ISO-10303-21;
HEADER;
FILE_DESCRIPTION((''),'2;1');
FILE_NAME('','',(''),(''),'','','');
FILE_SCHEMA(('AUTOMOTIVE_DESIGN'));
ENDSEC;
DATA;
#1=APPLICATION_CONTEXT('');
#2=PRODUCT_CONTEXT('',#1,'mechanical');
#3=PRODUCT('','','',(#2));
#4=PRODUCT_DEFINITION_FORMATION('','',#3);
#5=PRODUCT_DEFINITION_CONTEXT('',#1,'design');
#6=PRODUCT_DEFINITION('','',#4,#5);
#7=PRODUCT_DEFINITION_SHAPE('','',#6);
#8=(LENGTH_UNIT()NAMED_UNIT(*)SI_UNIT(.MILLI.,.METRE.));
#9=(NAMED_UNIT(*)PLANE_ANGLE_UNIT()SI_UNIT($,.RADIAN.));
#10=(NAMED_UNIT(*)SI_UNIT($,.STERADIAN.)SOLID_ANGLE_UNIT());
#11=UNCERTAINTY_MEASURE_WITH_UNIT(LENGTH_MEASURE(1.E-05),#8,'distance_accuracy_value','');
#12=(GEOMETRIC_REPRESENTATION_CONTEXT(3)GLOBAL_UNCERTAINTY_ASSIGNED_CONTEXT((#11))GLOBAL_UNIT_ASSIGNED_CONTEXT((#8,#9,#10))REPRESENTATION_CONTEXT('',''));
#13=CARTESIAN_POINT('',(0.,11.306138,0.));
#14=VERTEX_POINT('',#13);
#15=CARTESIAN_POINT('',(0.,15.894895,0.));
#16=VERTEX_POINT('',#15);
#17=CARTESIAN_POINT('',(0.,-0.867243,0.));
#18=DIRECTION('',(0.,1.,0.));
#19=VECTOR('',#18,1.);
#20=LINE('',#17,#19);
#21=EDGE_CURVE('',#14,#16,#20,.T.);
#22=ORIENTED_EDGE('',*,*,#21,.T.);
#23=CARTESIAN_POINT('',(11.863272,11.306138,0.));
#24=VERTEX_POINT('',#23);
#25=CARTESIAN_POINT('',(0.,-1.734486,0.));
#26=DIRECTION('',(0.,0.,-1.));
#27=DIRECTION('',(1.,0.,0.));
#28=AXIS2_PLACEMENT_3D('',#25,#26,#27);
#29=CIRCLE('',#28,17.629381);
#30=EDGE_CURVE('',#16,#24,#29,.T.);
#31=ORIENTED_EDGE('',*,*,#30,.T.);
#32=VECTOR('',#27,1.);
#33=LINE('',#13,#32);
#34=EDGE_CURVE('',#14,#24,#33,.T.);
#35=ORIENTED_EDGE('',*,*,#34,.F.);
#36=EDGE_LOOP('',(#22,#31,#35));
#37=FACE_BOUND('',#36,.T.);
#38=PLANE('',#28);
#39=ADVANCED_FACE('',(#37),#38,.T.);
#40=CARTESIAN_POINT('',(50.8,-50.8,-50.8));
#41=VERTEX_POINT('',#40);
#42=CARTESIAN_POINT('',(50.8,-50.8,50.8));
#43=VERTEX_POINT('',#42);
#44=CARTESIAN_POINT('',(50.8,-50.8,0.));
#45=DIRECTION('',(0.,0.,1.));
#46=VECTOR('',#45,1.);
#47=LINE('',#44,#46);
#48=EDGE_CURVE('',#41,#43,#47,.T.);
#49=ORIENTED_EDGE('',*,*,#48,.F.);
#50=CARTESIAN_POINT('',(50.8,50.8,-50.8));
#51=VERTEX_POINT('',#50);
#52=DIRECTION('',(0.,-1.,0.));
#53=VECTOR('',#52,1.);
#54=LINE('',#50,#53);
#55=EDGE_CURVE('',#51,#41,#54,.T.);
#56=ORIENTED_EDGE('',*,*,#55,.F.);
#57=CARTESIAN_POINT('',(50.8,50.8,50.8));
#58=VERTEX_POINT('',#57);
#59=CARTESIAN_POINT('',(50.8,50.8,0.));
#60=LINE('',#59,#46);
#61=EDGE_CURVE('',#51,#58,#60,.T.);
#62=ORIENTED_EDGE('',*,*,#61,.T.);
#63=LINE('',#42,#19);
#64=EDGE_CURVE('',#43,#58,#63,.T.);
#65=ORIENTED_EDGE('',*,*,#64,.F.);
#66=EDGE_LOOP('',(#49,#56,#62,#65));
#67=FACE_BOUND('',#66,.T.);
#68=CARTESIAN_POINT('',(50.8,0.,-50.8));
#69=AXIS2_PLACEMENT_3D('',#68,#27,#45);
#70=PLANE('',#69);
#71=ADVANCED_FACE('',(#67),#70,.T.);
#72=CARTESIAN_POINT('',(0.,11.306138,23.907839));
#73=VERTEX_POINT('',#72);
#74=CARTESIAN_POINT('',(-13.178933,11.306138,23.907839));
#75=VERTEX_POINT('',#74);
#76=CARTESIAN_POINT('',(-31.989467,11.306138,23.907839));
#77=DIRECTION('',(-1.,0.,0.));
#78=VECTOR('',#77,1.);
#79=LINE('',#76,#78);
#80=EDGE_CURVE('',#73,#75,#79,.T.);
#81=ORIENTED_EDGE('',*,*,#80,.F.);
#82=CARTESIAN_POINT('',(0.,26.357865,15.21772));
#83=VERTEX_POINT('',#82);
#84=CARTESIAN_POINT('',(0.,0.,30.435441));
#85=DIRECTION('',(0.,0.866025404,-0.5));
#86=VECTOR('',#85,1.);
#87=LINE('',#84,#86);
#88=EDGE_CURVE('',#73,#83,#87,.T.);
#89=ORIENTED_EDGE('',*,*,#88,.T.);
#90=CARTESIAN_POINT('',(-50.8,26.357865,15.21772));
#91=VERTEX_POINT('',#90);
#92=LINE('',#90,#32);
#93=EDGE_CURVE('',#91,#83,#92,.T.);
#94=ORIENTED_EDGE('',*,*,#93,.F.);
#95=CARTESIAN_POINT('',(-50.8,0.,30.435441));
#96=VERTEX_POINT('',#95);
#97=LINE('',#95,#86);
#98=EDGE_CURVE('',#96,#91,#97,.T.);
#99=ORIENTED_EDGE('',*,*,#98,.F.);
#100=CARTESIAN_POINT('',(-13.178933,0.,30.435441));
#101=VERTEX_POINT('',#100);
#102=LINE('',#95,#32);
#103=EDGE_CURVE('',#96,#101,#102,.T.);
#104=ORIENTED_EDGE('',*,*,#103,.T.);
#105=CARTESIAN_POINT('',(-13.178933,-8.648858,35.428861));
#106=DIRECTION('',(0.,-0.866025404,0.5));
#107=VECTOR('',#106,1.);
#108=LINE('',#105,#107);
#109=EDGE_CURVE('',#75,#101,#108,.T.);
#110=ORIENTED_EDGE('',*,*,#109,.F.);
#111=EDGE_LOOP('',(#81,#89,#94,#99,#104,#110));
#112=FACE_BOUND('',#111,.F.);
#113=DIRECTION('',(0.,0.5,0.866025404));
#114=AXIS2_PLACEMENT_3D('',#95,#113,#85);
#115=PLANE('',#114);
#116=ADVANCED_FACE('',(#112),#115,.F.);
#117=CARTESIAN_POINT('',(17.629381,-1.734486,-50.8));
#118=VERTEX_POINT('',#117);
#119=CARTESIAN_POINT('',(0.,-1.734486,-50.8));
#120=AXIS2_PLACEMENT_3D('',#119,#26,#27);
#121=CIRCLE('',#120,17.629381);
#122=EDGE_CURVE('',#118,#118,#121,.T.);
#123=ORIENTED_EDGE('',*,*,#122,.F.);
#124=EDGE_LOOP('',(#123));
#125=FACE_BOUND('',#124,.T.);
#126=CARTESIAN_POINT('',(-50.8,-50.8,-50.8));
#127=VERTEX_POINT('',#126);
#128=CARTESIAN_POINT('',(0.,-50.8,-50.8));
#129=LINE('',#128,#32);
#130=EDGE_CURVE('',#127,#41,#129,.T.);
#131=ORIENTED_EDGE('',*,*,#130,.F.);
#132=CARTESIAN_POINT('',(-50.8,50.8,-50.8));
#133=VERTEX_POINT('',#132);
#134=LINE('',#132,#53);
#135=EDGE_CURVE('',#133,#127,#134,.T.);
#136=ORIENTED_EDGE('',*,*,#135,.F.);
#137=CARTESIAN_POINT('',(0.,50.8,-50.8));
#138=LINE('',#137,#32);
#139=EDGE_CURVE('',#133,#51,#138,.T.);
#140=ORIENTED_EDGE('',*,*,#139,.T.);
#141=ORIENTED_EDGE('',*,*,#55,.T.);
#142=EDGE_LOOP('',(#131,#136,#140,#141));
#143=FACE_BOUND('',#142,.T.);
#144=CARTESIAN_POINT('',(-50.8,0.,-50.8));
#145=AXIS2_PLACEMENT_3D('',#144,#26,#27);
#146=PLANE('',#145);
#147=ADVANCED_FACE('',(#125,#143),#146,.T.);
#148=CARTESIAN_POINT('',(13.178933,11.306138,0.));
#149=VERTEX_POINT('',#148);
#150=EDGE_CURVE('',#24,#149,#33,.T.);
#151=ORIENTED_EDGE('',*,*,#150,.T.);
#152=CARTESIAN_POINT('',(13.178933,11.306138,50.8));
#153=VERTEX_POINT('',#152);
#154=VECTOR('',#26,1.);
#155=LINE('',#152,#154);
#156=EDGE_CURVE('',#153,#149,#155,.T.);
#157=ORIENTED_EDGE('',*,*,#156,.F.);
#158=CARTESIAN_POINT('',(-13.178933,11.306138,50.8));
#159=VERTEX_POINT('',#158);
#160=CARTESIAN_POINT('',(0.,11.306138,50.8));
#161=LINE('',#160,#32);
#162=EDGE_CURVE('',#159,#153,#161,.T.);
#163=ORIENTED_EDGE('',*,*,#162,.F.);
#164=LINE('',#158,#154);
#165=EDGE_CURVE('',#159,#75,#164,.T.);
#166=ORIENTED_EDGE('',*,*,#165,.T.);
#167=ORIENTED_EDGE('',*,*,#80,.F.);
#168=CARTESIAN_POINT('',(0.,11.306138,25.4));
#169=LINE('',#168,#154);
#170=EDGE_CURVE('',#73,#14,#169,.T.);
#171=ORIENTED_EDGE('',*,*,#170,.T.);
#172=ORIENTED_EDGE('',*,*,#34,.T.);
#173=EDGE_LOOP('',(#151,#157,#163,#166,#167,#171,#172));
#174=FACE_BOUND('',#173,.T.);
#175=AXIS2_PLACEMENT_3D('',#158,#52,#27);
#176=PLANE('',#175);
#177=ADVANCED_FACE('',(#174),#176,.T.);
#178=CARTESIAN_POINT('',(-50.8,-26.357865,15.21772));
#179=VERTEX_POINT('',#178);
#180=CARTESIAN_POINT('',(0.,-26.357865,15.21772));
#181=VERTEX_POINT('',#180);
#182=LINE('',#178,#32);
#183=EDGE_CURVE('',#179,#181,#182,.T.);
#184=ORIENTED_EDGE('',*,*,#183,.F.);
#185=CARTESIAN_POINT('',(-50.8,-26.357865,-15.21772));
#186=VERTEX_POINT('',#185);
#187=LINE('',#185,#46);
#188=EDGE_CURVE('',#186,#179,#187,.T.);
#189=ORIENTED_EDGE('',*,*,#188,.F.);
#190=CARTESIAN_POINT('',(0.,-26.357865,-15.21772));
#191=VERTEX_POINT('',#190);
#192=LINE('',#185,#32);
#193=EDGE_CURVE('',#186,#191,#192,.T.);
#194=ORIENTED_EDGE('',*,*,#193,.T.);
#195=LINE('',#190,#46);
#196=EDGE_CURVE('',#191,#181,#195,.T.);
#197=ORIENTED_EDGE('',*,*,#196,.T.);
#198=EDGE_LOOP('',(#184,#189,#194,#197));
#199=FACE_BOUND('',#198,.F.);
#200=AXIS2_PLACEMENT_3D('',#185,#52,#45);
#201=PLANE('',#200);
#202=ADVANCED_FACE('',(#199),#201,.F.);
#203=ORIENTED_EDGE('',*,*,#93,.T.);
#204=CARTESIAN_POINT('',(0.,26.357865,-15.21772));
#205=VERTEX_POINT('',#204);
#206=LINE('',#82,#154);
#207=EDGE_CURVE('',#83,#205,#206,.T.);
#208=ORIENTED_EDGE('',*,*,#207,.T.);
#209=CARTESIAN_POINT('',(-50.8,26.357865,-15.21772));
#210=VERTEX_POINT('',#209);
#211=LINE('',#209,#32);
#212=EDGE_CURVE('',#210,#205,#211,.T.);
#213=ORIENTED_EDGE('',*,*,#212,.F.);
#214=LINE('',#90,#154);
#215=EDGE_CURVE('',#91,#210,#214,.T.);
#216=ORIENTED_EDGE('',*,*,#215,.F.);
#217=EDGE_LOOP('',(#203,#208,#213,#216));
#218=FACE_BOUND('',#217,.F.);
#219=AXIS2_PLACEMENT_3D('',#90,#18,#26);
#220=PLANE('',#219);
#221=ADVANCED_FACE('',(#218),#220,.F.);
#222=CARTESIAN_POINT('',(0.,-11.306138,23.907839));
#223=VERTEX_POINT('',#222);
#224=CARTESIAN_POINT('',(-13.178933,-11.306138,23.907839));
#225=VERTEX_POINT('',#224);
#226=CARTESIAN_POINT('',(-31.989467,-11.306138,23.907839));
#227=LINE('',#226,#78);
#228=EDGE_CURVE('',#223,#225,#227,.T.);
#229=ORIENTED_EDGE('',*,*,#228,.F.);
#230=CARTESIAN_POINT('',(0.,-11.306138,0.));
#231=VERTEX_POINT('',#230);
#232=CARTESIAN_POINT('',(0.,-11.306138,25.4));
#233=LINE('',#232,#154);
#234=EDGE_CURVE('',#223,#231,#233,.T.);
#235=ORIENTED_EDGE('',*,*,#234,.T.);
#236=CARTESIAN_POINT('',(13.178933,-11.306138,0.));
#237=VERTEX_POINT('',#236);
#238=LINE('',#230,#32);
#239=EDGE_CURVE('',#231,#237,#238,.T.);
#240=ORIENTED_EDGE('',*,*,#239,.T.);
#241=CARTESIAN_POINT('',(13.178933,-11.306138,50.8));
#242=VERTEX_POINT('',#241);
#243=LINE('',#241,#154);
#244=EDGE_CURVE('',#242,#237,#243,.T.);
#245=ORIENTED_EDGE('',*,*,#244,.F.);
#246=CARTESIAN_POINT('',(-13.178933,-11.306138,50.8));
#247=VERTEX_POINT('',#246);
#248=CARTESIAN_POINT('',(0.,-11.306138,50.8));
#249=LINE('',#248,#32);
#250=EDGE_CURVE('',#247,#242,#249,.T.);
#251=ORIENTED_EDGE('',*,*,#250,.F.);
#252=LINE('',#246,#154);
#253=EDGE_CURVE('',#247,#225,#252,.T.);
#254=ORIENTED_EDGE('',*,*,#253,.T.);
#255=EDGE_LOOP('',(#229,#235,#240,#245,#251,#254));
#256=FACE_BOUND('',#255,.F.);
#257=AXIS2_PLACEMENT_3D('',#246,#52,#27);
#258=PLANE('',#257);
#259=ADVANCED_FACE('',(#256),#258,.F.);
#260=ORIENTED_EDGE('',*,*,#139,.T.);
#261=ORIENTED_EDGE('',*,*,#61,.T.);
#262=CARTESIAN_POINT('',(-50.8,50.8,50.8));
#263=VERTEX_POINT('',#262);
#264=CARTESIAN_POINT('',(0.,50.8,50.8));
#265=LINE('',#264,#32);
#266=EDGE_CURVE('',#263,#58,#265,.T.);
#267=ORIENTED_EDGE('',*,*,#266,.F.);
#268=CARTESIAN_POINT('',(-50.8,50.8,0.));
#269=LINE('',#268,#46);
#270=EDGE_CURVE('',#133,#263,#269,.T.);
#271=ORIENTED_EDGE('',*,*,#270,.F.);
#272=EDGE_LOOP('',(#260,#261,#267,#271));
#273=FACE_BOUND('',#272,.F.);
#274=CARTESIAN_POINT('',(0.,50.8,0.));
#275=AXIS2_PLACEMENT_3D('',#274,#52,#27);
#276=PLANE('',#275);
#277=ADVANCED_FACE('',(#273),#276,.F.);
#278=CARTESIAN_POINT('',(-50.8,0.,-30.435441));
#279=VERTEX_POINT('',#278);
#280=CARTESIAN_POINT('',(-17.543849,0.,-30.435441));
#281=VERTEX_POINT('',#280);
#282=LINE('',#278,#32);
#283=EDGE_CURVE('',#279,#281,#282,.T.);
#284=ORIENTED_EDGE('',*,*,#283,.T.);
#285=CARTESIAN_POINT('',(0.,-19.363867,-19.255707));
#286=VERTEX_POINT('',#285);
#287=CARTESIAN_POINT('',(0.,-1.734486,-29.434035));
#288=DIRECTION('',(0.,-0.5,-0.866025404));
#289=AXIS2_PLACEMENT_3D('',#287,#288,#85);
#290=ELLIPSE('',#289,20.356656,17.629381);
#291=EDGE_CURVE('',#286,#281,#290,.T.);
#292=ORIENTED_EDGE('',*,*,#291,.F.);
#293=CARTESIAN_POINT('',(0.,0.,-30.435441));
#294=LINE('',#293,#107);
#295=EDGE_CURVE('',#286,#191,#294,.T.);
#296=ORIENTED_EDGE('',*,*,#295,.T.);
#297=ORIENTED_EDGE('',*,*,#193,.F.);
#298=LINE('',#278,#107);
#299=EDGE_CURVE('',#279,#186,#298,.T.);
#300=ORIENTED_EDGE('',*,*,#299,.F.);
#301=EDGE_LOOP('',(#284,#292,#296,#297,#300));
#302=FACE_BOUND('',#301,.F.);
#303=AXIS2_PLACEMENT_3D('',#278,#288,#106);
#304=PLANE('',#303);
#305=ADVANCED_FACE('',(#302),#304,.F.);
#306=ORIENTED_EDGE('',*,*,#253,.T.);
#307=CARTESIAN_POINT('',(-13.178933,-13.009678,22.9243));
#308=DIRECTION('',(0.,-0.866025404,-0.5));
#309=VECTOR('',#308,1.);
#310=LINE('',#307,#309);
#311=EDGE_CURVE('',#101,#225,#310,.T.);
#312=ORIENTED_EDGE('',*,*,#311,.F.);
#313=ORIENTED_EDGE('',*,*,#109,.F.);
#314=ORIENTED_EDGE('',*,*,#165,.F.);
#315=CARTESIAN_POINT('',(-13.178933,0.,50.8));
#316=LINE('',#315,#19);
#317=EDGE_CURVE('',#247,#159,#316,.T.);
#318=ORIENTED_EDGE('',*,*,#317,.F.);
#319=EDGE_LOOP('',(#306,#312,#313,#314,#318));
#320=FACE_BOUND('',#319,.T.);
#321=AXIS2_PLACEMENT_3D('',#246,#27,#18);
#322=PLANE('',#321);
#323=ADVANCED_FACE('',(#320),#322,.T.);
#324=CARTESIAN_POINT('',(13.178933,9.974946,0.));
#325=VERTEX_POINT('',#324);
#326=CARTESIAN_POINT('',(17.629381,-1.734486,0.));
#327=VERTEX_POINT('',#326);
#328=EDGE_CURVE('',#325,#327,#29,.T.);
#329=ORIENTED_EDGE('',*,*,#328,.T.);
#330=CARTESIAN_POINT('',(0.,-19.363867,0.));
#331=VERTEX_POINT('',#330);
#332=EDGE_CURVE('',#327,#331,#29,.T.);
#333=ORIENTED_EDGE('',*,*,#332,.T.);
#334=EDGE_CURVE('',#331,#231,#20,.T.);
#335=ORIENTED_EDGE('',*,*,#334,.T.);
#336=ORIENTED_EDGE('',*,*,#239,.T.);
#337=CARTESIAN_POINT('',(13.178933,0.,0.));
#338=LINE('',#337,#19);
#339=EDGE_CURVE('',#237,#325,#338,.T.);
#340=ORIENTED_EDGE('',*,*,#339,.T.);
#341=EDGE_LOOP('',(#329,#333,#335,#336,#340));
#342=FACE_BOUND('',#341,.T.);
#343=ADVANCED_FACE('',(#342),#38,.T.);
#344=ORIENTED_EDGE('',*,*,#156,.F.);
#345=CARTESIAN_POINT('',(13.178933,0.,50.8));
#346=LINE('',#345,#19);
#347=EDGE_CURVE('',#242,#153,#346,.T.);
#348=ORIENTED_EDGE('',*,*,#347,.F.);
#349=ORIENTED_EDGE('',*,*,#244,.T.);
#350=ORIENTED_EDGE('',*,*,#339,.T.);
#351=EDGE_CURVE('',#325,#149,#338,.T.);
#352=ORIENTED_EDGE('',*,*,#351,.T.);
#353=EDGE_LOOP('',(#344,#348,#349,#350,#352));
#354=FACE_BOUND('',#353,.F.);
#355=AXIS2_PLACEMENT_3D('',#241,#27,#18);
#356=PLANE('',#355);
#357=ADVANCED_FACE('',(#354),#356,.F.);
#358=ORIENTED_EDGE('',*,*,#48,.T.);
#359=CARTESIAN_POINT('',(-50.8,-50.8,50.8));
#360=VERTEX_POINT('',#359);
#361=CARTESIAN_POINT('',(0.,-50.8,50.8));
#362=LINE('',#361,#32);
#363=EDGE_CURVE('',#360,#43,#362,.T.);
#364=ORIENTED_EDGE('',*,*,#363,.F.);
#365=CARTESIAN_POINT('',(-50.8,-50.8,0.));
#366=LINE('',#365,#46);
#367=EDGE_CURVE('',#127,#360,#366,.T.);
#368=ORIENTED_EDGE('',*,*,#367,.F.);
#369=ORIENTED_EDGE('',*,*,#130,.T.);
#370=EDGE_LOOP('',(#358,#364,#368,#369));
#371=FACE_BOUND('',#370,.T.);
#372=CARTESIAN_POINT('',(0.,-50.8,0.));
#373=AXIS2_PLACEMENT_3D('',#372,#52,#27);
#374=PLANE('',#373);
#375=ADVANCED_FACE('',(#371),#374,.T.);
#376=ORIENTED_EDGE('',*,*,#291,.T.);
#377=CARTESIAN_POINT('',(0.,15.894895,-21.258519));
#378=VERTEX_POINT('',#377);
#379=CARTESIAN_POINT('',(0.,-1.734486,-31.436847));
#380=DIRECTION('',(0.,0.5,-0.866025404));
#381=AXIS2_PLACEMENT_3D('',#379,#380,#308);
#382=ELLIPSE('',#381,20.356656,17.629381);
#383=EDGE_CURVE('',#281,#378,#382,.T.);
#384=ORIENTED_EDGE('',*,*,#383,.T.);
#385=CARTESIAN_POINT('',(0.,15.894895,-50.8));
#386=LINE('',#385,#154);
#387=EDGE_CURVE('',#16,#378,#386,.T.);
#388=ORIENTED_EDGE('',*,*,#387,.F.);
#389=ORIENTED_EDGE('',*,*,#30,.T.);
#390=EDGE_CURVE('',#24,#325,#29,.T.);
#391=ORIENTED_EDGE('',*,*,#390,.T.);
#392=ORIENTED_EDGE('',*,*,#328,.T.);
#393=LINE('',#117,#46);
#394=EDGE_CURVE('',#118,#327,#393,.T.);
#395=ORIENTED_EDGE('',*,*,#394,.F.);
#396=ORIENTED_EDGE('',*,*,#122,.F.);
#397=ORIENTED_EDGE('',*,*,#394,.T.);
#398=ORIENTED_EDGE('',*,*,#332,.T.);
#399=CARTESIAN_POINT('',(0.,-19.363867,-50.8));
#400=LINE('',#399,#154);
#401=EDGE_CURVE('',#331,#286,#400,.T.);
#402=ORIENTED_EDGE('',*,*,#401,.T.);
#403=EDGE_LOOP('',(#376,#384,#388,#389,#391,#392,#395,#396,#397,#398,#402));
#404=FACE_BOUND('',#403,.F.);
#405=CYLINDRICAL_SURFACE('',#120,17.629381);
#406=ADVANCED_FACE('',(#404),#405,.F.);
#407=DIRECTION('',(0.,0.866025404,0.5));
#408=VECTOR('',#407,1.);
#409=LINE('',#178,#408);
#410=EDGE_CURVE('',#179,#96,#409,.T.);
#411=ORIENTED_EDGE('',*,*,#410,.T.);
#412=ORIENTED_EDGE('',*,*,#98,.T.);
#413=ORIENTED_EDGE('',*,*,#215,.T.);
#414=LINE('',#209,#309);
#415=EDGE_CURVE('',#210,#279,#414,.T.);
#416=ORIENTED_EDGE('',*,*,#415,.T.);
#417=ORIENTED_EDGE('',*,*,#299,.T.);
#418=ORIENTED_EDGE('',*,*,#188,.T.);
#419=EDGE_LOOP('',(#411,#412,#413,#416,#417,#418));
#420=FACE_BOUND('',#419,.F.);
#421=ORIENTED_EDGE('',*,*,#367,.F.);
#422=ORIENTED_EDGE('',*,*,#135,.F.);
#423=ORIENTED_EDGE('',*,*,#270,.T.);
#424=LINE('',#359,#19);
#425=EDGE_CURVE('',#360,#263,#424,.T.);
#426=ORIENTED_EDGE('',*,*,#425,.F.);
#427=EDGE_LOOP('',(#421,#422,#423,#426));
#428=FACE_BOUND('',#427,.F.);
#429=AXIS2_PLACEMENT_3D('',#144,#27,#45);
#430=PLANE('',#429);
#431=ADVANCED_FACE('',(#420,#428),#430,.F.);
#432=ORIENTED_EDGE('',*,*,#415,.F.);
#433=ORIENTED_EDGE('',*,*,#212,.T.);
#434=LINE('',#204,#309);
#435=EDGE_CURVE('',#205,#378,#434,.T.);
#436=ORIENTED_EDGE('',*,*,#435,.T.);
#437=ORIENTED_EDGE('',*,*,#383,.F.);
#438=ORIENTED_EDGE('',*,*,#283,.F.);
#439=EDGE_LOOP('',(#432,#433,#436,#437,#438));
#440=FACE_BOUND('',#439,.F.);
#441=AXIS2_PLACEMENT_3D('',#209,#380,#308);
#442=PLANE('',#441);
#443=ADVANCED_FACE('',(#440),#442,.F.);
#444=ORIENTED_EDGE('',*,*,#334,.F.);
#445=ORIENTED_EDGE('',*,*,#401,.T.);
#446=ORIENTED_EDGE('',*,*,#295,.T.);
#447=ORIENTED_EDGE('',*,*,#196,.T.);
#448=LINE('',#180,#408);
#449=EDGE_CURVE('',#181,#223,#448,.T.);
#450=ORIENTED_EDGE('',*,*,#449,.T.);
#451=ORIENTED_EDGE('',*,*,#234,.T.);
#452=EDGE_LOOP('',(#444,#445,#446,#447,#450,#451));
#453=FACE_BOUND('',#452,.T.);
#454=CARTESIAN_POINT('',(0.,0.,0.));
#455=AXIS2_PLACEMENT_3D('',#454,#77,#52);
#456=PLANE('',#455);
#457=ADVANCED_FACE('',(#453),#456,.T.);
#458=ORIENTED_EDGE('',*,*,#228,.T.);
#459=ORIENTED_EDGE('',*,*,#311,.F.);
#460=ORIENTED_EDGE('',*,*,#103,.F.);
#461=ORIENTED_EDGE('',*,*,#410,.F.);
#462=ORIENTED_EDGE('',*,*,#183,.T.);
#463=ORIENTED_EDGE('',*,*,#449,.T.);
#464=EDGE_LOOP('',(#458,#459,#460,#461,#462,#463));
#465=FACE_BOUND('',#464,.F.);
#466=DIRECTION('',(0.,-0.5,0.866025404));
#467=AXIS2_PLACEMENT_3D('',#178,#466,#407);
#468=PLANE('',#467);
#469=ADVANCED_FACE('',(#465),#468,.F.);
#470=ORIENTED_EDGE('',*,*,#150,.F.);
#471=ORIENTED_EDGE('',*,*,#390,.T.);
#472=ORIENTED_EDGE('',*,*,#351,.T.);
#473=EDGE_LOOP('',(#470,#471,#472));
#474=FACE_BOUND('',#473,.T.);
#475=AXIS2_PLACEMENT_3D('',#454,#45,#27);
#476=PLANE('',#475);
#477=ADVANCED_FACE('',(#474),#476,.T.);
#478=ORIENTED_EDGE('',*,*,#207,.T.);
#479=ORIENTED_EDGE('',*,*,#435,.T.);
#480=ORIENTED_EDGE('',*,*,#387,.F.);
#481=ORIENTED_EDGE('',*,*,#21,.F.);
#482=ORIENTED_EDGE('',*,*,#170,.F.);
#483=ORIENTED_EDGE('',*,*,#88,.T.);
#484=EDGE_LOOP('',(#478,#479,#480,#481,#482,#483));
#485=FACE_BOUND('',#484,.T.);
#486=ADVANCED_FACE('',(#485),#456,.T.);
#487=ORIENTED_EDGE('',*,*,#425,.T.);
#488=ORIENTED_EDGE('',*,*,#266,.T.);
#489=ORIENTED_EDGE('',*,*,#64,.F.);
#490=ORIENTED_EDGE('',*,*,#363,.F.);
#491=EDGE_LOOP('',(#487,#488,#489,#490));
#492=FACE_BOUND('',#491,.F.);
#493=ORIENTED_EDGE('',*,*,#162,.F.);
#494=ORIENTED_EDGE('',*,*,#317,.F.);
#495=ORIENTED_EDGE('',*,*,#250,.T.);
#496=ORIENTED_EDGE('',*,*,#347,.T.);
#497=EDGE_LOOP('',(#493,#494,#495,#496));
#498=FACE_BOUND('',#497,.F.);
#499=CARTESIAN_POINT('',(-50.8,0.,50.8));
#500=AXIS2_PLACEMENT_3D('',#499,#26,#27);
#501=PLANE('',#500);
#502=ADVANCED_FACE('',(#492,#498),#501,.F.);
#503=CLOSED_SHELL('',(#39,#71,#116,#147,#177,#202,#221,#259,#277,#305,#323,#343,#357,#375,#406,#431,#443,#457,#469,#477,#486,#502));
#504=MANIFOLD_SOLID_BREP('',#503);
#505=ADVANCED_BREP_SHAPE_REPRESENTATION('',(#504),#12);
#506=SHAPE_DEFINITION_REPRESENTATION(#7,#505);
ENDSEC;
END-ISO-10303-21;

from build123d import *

# Parameters (mm, degrees)
F1_W     = 101.6
F1_H     = 101.6
F2_DEPTH = 50.8
F3_W     = 26.3578668237
F3_H     = 22.6122755557
F4_DEPTH = 50.8
F5_R     = 17.6293811016
F6_DEPTH = 50.8
F8_DEPTH = 50.8


# Not quite as in the source:
# - a variable given as a bare number and used for a length is read in inches; the dataset says mm whatever the document's units were


with BuildPart() as f2:
    # F1 (on Front) → F2 (new body, symmetric)
    with BuildSketch(Plane.XZ):
        Rectangle(F1_W, F1_H)
    extrude(amount=F2_DEPTH, both=True)

    # F3 (on face) → F4 (cut)
    with BuildSketch(Plane.XY.offset(50.8)):
        Rectangle(F3_W, F3_H)
    extrude(amount=-F4_DEPTH, mode=Mode.SUBTRACT)

    # F5 (on face) → F6 (cut)
    with BuildSketch(Plane(origin=(0, 0, -50.8), x_dir=(1, 0, 0), z_dir=(0, 0, -1))):
        with Locations((0, 1.7344856169)):
            Circle(F5_R)
    extrude(amount=-F6_DEPTH, mode=Mode.SUBTRACT)

    # F7 (on face) → F8 (cut)
    with BuildSketch(Plane(origin=(-50.8, 0, 0), x_dir=(0, -1, 0), z_dir=(-1, 0, 0))):
        Polygon((26.357864961, -15.2177204305), (26.357864961, 15.2177204305), (0, 30.435440861), (-26.357864961, 15.2177204305), (-26.357864961, -15.2177204305), (0, -30.435440861), align=None)
    extrude(amount=-F8_DEPTH, mode=Mode.SUBTRACT)


solid = f2.part
